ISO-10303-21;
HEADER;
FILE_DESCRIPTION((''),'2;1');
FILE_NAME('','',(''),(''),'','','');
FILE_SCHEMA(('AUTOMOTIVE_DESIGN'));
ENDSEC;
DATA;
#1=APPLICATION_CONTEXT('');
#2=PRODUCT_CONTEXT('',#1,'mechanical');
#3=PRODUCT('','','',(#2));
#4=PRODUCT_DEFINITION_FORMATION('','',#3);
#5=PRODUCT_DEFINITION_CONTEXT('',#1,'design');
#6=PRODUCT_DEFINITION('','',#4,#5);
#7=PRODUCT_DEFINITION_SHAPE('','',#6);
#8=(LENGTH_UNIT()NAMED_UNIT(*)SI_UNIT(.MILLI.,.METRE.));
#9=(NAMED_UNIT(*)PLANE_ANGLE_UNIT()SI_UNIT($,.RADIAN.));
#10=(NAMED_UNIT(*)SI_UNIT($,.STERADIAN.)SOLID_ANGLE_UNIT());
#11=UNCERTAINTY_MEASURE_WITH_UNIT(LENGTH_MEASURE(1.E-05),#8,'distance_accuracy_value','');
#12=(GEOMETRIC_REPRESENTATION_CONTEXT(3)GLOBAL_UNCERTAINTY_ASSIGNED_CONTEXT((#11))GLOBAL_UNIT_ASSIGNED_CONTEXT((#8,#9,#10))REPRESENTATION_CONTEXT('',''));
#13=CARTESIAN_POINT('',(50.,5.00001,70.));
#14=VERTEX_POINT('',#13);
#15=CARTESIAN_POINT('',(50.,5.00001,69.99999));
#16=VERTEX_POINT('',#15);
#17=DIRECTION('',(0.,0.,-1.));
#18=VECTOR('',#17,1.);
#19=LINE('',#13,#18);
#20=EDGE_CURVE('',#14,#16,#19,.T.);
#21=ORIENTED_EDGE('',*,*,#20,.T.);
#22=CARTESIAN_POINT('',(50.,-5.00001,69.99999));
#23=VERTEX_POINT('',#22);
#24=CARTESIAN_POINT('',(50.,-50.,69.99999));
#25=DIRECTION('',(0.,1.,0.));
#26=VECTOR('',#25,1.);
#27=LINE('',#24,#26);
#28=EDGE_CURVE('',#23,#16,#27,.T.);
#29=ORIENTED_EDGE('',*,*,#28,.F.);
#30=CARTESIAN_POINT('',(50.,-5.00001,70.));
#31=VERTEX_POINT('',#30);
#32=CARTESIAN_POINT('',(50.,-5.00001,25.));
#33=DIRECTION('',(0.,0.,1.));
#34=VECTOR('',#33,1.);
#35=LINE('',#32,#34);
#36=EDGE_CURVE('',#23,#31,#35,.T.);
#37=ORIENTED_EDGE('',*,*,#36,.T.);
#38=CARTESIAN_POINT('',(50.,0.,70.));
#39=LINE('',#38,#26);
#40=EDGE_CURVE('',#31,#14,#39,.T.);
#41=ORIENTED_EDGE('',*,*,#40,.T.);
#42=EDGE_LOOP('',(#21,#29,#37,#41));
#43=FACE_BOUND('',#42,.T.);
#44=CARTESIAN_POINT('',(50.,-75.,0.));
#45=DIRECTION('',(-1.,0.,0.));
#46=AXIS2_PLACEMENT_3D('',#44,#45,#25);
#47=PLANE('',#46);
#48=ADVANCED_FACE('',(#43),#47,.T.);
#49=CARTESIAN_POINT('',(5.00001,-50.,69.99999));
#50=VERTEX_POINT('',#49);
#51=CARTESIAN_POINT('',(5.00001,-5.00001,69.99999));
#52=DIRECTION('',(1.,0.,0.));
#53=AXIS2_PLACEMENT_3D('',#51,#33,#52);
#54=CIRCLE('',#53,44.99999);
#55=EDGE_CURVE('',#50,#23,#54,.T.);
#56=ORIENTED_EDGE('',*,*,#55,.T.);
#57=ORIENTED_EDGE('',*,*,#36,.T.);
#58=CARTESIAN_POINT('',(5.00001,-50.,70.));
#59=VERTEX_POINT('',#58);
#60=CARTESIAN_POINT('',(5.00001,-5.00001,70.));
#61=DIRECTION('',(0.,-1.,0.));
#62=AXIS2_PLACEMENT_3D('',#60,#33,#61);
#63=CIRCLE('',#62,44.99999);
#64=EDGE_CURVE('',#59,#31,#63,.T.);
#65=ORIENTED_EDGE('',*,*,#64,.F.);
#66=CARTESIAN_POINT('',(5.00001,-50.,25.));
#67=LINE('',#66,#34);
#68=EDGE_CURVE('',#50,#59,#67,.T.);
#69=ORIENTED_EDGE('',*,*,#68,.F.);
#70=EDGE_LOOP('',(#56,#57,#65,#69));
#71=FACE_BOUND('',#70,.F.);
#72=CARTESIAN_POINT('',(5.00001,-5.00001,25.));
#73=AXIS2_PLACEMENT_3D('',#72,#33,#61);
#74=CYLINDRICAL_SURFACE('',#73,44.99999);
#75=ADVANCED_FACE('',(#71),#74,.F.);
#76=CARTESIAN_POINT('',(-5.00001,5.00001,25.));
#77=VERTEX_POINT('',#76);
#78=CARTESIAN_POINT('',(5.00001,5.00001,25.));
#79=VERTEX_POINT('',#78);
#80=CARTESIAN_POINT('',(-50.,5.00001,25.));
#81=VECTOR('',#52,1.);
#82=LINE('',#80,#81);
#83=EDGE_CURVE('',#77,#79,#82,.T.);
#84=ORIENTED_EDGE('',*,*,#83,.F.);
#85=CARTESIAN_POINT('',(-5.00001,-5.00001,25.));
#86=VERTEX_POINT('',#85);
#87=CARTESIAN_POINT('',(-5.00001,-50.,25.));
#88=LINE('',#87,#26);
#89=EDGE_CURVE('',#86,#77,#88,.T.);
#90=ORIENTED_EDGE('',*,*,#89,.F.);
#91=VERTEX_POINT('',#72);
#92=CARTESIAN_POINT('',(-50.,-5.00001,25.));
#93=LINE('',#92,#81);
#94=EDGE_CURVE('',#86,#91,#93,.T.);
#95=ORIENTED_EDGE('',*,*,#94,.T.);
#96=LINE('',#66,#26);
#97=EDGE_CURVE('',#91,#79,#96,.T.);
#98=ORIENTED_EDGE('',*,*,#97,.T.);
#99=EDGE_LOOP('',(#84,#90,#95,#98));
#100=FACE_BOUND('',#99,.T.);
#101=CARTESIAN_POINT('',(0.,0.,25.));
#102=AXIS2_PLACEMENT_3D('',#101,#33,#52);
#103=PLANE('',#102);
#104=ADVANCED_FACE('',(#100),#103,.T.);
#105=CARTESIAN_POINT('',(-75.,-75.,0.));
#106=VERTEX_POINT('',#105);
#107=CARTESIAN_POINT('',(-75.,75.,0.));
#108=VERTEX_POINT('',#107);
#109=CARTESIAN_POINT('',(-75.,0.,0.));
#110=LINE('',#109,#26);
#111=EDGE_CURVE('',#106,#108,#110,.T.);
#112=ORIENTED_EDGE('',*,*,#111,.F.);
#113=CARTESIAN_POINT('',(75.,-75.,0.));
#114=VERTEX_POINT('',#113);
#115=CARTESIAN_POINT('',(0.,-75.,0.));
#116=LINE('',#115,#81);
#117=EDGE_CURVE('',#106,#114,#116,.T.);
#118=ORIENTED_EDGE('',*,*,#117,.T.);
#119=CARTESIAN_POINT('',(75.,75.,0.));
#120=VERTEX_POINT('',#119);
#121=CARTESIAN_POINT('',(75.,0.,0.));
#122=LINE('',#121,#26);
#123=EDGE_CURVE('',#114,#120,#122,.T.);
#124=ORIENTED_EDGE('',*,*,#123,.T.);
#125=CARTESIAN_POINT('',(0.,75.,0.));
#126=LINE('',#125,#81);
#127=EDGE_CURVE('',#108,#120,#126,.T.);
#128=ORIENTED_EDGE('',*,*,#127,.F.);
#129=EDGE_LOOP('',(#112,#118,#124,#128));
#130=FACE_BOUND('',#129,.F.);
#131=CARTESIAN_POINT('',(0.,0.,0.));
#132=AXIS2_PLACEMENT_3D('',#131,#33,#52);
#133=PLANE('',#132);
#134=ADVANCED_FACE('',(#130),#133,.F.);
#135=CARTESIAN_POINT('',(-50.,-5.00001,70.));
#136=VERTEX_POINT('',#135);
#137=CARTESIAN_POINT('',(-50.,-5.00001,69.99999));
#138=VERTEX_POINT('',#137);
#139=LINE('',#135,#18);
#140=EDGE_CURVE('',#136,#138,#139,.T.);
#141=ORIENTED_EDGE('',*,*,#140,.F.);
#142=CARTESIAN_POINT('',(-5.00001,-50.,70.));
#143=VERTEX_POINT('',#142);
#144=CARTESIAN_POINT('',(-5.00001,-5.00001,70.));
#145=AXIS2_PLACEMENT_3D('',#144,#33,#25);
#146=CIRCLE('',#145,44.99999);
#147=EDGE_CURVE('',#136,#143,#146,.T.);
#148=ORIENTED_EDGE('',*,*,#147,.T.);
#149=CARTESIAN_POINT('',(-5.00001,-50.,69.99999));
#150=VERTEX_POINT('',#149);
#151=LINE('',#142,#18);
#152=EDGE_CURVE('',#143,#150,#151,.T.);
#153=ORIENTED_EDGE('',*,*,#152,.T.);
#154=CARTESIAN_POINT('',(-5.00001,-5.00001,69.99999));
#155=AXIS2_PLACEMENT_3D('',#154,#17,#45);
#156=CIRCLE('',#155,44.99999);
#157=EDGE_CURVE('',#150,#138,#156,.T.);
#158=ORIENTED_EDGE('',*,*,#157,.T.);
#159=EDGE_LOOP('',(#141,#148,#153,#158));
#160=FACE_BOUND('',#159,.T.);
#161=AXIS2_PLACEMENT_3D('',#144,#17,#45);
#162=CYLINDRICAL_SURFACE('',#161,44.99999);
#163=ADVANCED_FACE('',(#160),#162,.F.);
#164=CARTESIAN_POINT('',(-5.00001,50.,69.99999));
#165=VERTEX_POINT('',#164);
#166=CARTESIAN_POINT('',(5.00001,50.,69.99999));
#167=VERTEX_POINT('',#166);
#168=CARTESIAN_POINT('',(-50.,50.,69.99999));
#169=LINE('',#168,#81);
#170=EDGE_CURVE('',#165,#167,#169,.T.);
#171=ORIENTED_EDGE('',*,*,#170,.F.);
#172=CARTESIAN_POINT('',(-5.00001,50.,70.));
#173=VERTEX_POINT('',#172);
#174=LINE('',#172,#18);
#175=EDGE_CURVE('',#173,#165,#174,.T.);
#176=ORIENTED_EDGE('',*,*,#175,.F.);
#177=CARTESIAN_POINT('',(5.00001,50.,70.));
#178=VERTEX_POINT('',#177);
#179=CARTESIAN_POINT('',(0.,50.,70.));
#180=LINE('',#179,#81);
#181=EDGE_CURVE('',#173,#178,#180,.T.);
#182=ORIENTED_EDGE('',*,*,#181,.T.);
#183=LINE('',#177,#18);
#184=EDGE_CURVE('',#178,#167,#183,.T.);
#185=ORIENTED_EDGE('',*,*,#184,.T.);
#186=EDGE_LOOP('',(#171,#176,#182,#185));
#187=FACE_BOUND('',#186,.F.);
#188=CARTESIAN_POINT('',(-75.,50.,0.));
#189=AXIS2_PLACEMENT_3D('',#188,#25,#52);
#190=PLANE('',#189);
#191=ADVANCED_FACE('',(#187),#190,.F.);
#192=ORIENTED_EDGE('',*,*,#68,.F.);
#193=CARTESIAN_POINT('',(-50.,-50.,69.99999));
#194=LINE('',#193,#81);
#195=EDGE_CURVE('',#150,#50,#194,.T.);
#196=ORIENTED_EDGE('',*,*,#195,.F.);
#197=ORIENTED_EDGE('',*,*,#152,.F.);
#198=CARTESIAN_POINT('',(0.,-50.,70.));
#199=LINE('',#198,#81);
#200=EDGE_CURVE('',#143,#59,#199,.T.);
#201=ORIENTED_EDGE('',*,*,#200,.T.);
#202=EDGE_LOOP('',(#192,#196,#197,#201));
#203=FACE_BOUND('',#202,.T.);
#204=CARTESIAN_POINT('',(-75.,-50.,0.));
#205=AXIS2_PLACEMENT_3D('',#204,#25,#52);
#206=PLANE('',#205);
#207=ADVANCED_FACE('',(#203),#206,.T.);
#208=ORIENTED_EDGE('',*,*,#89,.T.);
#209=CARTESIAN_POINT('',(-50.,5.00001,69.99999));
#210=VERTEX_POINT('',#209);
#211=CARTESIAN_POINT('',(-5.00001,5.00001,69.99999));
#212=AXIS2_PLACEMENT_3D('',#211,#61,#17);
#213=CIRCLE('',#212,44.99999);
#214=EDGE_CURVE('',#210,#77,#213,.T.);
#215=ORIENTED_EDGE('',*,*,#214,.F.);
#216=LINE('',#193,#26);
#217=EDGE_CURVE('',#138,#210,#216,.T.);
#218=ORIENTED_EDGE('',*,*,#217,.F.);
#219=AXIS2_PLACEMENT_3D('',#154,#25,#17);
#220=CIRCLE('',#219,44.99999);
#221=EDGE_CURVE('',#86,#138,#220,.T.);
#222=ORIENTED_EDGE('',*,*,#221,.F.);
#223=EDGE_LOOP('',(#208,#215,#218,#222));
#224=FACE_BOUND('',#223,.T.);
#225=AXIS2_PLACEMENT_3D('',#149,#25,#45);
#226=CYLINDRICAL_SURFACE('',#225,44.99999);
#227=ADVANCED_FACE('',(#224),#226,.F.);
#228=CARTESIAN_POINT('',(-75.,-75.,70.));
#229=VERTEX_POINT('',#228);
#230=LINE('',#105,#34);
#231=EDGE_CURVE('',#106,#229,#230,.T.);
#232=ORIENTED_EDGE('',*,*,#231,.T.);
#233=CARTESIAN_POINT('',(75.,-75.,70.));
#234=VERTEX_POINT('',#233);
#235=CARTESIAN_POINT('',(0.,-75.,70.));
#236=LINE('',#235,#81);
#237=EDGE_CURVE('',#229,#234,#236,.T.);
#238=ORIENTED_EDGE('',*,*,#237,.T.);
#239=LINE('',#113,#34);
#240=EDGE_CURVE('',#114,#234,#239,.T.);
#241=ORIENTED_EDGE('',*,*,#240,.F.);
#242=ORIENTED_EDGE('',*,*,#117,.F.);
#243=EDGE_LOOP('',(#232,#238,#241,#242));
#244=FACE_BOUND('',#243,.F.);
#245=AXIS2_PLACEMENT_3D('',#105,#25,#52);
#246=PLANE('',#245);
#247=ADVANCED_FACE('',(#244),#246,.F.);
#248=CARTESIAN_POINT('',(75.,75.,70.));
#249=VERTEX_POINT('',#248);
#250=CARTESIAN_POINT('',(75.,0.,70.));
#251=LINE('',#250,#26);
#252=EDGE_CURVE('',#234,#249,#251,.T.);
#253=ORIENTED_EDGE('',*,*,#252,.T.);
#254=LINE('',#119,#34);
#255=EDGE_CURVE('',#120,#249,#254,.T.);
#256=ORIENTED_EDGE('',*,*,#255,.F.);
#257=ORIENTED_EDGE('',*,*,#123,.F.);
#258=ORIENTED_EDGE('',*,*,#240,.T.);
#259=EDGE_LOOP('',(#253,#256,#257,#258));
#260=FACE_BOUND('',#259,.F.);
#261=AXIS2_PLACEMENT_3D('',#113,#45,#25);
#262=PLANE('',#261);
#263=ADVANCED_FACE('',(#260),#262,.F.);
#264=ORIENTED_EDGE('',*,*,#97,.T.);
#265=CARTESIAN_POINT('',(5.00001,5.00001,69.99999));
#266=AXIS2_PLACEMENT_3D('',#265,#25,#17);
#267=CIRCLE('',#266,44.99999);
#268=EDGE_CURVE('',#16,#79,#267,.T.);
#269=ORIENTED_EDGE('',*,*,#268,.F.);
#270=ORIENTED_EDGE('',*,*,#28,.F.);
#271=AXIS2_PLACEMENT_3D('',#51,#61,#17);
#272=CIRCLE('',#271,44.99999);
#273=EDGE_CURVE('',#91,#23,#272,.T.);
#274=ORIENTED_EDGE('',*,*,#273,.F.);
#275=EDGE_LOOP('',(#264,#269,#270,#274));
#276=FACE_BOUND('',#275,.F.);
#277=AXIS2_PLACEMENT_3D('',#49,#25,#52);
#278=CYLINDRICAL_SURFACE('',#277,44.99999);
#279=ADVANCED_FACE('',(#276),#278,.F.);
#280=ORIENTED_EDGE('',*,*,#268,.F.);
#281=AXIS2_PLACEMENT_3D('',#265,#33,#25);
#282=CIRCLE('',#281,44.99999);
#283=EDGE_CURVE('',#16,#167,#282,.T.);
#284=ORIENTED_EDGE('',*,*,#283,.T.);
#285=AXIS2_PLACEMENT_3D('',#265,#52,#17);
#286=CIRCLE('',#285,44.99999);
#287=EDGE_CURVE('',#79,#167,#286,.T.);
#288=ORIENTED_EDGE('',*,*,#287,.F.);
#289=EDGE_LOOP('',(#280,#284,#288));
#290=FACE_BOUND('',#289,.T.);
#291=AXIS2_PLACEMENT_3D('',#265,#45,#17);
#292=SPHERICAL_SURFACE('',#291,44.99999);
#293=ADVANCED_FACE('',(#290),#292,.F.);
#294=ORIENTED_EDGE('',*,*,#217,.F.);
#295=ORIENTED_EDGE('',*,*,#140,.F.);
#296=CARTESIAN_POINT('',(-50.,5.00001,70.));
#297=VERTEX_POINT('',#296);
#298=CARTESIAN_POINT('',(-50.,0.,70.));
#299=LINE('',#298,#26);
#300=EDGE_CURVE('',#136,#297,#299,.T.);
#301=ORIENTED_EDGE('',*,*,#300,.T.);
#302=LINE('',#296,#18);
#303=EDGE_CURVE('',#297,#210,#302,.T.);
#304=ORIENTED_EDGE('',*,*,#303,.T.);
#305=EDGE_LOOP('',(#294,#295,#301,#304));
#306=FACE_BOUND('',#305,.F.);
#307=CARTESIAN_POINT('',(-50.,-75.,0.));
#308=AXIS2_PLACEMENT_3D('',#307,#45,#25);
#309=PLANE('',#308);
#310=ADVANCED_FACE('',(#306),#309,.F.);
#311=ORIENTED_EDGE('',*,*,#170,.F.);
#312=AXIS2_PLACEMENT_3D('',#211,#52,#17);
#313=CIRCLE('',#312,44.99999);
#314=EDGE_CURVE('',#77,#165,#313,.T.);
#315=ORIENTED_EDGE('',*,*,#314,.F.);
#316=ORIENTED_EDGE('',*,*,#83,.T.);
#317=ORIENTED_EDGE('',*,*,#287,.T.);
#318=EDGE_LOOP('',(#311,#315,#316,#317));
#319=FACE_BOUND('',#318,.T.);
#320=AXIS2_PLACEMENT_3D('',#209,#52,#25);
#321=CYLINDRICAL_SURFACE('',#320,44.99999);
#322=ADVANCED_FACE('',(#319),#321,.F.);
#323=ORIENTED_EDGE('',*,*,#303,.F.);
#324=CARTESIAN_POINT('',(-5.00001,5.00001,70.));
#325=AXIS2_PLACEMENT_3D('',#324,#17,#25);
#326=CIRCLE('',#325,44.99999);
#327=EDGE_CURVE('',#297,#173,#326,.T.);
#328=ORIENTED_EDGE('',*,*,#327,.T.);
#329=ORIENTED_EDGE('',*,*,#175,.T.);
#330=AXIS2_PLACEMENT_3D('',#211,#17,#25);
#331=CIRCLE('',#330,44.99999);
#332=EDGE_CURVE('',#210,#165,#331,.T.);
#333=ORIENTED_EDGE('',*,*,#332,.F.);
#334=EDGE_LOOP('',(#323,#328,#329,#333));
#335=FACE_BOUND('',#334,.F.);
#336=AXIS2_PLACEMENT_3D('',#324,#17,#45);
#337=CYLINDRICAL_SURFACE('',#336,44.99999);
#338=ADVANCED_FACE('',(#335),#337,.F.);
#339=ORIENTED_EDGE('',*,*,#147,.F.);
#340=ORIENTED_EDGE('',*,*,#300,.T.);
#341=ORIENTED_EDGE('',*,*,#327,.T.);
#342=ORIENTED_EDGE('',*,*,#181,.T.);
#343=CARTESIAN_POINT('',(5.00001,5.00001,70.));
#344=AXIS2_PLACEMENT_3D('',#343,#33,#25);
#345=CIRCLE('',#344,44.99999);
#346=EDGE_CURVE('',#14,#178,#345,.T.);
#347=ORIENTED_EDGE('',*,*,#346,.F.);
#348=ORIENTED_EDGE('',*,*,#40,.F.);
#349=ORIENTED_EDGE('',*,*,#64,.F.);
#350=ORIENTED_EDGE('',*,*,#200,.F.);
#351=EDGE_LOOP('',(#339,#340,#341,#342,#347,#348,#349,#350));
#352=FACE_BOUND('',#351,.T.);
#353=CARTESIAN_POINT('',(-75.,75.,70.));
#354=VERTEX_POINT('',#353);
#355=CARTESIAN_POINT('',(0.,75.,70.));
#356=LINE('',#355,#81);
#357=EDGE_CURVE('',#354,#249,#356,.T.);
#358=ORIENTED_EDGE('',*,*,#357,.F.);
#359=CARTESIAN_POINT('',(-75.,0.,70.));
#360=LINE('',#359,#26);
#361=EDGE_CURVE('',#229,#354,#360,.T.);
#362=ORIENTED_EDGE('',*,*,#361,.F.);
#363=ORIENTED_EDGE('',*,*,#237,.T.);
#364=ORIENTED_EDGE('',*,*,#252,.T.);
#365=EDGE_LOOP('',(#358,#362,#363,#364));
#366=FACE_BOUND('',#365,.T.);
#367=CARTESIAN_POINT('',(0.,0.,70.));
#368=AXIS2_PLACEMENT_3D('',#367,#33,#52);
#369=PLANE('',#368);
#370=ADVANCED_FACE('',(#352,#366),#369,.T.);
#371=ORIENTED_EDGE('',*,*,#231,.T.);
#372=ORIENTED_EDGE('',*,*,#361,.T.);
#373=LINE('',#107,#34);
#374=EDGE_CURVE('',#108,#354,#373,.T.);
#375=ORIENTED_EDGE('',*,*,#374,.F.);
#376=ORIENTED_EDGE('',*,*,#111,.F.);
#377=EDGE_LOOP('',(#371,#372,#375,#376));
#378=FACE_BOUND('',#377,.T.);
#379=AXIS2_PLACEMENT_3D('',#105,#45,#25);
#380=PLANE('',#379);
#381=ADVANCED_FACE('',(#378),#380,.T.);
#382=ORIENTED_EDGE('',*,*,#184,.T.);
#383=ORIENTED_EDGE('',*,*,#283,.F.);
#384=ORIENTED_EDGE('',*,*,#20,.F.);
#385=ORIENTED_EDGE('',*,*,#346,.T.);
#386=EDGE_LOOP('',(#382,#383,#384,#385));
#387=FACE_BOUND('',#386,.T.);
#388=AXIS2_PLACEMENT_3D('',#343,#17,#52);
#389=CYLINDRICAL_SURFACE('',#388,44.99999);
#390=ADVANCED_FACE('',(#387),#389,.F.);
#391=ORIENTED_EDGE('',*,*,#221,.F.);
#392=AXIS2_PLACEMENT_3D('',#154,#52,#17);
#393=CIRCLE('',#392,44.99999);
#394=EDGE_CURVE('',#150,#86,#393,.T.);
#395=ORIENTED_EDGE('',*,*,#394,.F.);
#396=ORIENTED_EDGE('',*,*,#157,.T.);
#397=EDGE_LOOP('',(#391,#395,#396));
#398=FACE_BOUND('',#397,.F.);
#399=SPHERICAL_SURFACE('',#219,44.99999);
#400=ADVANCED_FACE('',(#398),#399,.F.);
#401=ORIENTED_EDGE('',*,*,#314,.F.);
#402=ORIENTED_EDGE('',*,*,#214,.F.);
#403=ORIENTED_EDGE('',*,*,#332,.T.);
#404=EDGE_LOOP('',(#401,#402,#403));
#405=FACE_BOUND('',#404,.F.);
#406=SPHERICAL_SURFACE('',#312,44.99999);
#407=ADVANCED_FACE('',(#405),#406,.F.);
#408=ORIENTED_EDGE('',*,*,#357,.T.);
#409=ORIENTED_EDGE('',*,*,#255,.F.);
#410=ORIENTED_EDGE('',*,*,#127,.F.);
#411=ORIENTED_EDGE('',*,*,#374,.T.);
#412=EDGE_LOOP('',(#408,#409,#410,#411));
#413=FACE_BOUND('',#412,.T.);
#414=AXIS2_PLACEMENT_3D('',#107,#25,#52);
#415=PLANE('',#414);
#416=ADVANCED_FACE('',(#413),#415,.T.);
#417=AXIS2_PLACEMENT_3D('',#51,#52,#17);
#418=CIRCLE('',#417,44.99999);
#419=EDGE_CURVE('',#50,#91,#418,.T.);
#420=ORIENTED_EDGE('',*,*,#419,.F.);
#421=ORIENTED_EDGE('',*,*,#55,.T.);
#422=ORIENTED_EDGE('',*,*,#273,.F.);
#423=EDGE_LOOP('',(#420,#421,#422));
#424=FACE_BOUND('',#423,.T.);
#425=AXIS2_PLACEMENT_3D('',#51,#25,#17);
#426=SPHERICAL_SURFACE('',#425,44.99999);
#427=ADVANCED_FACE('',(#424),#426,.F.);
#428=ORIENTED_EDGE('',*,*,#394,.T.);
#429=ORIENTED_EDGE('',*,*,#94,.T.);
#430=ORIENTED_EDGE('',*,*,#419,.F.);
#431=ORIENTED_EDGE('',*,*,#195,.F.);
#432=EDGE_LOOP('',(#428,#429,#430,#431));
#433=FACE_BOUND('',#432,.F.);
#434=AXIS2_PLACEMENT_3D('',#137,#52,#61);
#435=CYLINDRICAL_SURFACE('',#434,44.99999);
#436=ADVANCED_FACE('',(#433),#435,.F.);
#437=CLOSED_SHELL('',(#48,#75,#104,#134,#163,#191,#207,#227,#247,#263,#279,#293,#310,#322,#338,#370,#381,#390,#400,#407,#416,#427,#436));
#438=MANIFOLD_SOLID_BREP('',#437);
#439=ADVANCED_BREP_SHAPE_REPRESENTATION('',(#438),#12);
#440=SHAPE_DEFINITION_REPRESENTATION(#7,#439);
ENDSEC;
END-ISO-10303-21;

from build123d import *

# Parameters (mm, degrees)
F0_W     = 150
F0_H     = 150
F1_DEPTH = 70
F2_T     = -25
F3_R     = 44.99999


# Not quite as in the source:
# - a fillet or chamfer is up to 0.001 mm smaller than in the source, because OpenCascade refuses the exact size


with BuildPart() as f1:
    # F0 (on Top) → F1 (new body)
    with BuildSketch(Plane.XY):
        Rectangle(F0_W, F0_H)
    extrude(amount=F1_DEPTH)

    # F2
    f2_openings = [f1.faces().sort_by_distance(p)[0] for p in [
        (0, 0, 70),
    ]]
    offset(amount=F2_T, openings=f2_openings)

    # F3 (radius 45 in the source; OpenCascade refuses exactly that, so slightly less here)
    f3_edges = [f1.edges().sort_by_distance(p)[0] for p in [
        (0, 50, 25),
        (-50, 0, 25),
        (50, 0, 25),
        (0, -50, 25),
        (50, -50, 47.5),
        (50, 50, 47.5),
        (-50, 50, 47.5),
        (-50, -50, 47.5),
    ]]
    fillet(f3_edges, radius=F3_R)


solid = f1.part
